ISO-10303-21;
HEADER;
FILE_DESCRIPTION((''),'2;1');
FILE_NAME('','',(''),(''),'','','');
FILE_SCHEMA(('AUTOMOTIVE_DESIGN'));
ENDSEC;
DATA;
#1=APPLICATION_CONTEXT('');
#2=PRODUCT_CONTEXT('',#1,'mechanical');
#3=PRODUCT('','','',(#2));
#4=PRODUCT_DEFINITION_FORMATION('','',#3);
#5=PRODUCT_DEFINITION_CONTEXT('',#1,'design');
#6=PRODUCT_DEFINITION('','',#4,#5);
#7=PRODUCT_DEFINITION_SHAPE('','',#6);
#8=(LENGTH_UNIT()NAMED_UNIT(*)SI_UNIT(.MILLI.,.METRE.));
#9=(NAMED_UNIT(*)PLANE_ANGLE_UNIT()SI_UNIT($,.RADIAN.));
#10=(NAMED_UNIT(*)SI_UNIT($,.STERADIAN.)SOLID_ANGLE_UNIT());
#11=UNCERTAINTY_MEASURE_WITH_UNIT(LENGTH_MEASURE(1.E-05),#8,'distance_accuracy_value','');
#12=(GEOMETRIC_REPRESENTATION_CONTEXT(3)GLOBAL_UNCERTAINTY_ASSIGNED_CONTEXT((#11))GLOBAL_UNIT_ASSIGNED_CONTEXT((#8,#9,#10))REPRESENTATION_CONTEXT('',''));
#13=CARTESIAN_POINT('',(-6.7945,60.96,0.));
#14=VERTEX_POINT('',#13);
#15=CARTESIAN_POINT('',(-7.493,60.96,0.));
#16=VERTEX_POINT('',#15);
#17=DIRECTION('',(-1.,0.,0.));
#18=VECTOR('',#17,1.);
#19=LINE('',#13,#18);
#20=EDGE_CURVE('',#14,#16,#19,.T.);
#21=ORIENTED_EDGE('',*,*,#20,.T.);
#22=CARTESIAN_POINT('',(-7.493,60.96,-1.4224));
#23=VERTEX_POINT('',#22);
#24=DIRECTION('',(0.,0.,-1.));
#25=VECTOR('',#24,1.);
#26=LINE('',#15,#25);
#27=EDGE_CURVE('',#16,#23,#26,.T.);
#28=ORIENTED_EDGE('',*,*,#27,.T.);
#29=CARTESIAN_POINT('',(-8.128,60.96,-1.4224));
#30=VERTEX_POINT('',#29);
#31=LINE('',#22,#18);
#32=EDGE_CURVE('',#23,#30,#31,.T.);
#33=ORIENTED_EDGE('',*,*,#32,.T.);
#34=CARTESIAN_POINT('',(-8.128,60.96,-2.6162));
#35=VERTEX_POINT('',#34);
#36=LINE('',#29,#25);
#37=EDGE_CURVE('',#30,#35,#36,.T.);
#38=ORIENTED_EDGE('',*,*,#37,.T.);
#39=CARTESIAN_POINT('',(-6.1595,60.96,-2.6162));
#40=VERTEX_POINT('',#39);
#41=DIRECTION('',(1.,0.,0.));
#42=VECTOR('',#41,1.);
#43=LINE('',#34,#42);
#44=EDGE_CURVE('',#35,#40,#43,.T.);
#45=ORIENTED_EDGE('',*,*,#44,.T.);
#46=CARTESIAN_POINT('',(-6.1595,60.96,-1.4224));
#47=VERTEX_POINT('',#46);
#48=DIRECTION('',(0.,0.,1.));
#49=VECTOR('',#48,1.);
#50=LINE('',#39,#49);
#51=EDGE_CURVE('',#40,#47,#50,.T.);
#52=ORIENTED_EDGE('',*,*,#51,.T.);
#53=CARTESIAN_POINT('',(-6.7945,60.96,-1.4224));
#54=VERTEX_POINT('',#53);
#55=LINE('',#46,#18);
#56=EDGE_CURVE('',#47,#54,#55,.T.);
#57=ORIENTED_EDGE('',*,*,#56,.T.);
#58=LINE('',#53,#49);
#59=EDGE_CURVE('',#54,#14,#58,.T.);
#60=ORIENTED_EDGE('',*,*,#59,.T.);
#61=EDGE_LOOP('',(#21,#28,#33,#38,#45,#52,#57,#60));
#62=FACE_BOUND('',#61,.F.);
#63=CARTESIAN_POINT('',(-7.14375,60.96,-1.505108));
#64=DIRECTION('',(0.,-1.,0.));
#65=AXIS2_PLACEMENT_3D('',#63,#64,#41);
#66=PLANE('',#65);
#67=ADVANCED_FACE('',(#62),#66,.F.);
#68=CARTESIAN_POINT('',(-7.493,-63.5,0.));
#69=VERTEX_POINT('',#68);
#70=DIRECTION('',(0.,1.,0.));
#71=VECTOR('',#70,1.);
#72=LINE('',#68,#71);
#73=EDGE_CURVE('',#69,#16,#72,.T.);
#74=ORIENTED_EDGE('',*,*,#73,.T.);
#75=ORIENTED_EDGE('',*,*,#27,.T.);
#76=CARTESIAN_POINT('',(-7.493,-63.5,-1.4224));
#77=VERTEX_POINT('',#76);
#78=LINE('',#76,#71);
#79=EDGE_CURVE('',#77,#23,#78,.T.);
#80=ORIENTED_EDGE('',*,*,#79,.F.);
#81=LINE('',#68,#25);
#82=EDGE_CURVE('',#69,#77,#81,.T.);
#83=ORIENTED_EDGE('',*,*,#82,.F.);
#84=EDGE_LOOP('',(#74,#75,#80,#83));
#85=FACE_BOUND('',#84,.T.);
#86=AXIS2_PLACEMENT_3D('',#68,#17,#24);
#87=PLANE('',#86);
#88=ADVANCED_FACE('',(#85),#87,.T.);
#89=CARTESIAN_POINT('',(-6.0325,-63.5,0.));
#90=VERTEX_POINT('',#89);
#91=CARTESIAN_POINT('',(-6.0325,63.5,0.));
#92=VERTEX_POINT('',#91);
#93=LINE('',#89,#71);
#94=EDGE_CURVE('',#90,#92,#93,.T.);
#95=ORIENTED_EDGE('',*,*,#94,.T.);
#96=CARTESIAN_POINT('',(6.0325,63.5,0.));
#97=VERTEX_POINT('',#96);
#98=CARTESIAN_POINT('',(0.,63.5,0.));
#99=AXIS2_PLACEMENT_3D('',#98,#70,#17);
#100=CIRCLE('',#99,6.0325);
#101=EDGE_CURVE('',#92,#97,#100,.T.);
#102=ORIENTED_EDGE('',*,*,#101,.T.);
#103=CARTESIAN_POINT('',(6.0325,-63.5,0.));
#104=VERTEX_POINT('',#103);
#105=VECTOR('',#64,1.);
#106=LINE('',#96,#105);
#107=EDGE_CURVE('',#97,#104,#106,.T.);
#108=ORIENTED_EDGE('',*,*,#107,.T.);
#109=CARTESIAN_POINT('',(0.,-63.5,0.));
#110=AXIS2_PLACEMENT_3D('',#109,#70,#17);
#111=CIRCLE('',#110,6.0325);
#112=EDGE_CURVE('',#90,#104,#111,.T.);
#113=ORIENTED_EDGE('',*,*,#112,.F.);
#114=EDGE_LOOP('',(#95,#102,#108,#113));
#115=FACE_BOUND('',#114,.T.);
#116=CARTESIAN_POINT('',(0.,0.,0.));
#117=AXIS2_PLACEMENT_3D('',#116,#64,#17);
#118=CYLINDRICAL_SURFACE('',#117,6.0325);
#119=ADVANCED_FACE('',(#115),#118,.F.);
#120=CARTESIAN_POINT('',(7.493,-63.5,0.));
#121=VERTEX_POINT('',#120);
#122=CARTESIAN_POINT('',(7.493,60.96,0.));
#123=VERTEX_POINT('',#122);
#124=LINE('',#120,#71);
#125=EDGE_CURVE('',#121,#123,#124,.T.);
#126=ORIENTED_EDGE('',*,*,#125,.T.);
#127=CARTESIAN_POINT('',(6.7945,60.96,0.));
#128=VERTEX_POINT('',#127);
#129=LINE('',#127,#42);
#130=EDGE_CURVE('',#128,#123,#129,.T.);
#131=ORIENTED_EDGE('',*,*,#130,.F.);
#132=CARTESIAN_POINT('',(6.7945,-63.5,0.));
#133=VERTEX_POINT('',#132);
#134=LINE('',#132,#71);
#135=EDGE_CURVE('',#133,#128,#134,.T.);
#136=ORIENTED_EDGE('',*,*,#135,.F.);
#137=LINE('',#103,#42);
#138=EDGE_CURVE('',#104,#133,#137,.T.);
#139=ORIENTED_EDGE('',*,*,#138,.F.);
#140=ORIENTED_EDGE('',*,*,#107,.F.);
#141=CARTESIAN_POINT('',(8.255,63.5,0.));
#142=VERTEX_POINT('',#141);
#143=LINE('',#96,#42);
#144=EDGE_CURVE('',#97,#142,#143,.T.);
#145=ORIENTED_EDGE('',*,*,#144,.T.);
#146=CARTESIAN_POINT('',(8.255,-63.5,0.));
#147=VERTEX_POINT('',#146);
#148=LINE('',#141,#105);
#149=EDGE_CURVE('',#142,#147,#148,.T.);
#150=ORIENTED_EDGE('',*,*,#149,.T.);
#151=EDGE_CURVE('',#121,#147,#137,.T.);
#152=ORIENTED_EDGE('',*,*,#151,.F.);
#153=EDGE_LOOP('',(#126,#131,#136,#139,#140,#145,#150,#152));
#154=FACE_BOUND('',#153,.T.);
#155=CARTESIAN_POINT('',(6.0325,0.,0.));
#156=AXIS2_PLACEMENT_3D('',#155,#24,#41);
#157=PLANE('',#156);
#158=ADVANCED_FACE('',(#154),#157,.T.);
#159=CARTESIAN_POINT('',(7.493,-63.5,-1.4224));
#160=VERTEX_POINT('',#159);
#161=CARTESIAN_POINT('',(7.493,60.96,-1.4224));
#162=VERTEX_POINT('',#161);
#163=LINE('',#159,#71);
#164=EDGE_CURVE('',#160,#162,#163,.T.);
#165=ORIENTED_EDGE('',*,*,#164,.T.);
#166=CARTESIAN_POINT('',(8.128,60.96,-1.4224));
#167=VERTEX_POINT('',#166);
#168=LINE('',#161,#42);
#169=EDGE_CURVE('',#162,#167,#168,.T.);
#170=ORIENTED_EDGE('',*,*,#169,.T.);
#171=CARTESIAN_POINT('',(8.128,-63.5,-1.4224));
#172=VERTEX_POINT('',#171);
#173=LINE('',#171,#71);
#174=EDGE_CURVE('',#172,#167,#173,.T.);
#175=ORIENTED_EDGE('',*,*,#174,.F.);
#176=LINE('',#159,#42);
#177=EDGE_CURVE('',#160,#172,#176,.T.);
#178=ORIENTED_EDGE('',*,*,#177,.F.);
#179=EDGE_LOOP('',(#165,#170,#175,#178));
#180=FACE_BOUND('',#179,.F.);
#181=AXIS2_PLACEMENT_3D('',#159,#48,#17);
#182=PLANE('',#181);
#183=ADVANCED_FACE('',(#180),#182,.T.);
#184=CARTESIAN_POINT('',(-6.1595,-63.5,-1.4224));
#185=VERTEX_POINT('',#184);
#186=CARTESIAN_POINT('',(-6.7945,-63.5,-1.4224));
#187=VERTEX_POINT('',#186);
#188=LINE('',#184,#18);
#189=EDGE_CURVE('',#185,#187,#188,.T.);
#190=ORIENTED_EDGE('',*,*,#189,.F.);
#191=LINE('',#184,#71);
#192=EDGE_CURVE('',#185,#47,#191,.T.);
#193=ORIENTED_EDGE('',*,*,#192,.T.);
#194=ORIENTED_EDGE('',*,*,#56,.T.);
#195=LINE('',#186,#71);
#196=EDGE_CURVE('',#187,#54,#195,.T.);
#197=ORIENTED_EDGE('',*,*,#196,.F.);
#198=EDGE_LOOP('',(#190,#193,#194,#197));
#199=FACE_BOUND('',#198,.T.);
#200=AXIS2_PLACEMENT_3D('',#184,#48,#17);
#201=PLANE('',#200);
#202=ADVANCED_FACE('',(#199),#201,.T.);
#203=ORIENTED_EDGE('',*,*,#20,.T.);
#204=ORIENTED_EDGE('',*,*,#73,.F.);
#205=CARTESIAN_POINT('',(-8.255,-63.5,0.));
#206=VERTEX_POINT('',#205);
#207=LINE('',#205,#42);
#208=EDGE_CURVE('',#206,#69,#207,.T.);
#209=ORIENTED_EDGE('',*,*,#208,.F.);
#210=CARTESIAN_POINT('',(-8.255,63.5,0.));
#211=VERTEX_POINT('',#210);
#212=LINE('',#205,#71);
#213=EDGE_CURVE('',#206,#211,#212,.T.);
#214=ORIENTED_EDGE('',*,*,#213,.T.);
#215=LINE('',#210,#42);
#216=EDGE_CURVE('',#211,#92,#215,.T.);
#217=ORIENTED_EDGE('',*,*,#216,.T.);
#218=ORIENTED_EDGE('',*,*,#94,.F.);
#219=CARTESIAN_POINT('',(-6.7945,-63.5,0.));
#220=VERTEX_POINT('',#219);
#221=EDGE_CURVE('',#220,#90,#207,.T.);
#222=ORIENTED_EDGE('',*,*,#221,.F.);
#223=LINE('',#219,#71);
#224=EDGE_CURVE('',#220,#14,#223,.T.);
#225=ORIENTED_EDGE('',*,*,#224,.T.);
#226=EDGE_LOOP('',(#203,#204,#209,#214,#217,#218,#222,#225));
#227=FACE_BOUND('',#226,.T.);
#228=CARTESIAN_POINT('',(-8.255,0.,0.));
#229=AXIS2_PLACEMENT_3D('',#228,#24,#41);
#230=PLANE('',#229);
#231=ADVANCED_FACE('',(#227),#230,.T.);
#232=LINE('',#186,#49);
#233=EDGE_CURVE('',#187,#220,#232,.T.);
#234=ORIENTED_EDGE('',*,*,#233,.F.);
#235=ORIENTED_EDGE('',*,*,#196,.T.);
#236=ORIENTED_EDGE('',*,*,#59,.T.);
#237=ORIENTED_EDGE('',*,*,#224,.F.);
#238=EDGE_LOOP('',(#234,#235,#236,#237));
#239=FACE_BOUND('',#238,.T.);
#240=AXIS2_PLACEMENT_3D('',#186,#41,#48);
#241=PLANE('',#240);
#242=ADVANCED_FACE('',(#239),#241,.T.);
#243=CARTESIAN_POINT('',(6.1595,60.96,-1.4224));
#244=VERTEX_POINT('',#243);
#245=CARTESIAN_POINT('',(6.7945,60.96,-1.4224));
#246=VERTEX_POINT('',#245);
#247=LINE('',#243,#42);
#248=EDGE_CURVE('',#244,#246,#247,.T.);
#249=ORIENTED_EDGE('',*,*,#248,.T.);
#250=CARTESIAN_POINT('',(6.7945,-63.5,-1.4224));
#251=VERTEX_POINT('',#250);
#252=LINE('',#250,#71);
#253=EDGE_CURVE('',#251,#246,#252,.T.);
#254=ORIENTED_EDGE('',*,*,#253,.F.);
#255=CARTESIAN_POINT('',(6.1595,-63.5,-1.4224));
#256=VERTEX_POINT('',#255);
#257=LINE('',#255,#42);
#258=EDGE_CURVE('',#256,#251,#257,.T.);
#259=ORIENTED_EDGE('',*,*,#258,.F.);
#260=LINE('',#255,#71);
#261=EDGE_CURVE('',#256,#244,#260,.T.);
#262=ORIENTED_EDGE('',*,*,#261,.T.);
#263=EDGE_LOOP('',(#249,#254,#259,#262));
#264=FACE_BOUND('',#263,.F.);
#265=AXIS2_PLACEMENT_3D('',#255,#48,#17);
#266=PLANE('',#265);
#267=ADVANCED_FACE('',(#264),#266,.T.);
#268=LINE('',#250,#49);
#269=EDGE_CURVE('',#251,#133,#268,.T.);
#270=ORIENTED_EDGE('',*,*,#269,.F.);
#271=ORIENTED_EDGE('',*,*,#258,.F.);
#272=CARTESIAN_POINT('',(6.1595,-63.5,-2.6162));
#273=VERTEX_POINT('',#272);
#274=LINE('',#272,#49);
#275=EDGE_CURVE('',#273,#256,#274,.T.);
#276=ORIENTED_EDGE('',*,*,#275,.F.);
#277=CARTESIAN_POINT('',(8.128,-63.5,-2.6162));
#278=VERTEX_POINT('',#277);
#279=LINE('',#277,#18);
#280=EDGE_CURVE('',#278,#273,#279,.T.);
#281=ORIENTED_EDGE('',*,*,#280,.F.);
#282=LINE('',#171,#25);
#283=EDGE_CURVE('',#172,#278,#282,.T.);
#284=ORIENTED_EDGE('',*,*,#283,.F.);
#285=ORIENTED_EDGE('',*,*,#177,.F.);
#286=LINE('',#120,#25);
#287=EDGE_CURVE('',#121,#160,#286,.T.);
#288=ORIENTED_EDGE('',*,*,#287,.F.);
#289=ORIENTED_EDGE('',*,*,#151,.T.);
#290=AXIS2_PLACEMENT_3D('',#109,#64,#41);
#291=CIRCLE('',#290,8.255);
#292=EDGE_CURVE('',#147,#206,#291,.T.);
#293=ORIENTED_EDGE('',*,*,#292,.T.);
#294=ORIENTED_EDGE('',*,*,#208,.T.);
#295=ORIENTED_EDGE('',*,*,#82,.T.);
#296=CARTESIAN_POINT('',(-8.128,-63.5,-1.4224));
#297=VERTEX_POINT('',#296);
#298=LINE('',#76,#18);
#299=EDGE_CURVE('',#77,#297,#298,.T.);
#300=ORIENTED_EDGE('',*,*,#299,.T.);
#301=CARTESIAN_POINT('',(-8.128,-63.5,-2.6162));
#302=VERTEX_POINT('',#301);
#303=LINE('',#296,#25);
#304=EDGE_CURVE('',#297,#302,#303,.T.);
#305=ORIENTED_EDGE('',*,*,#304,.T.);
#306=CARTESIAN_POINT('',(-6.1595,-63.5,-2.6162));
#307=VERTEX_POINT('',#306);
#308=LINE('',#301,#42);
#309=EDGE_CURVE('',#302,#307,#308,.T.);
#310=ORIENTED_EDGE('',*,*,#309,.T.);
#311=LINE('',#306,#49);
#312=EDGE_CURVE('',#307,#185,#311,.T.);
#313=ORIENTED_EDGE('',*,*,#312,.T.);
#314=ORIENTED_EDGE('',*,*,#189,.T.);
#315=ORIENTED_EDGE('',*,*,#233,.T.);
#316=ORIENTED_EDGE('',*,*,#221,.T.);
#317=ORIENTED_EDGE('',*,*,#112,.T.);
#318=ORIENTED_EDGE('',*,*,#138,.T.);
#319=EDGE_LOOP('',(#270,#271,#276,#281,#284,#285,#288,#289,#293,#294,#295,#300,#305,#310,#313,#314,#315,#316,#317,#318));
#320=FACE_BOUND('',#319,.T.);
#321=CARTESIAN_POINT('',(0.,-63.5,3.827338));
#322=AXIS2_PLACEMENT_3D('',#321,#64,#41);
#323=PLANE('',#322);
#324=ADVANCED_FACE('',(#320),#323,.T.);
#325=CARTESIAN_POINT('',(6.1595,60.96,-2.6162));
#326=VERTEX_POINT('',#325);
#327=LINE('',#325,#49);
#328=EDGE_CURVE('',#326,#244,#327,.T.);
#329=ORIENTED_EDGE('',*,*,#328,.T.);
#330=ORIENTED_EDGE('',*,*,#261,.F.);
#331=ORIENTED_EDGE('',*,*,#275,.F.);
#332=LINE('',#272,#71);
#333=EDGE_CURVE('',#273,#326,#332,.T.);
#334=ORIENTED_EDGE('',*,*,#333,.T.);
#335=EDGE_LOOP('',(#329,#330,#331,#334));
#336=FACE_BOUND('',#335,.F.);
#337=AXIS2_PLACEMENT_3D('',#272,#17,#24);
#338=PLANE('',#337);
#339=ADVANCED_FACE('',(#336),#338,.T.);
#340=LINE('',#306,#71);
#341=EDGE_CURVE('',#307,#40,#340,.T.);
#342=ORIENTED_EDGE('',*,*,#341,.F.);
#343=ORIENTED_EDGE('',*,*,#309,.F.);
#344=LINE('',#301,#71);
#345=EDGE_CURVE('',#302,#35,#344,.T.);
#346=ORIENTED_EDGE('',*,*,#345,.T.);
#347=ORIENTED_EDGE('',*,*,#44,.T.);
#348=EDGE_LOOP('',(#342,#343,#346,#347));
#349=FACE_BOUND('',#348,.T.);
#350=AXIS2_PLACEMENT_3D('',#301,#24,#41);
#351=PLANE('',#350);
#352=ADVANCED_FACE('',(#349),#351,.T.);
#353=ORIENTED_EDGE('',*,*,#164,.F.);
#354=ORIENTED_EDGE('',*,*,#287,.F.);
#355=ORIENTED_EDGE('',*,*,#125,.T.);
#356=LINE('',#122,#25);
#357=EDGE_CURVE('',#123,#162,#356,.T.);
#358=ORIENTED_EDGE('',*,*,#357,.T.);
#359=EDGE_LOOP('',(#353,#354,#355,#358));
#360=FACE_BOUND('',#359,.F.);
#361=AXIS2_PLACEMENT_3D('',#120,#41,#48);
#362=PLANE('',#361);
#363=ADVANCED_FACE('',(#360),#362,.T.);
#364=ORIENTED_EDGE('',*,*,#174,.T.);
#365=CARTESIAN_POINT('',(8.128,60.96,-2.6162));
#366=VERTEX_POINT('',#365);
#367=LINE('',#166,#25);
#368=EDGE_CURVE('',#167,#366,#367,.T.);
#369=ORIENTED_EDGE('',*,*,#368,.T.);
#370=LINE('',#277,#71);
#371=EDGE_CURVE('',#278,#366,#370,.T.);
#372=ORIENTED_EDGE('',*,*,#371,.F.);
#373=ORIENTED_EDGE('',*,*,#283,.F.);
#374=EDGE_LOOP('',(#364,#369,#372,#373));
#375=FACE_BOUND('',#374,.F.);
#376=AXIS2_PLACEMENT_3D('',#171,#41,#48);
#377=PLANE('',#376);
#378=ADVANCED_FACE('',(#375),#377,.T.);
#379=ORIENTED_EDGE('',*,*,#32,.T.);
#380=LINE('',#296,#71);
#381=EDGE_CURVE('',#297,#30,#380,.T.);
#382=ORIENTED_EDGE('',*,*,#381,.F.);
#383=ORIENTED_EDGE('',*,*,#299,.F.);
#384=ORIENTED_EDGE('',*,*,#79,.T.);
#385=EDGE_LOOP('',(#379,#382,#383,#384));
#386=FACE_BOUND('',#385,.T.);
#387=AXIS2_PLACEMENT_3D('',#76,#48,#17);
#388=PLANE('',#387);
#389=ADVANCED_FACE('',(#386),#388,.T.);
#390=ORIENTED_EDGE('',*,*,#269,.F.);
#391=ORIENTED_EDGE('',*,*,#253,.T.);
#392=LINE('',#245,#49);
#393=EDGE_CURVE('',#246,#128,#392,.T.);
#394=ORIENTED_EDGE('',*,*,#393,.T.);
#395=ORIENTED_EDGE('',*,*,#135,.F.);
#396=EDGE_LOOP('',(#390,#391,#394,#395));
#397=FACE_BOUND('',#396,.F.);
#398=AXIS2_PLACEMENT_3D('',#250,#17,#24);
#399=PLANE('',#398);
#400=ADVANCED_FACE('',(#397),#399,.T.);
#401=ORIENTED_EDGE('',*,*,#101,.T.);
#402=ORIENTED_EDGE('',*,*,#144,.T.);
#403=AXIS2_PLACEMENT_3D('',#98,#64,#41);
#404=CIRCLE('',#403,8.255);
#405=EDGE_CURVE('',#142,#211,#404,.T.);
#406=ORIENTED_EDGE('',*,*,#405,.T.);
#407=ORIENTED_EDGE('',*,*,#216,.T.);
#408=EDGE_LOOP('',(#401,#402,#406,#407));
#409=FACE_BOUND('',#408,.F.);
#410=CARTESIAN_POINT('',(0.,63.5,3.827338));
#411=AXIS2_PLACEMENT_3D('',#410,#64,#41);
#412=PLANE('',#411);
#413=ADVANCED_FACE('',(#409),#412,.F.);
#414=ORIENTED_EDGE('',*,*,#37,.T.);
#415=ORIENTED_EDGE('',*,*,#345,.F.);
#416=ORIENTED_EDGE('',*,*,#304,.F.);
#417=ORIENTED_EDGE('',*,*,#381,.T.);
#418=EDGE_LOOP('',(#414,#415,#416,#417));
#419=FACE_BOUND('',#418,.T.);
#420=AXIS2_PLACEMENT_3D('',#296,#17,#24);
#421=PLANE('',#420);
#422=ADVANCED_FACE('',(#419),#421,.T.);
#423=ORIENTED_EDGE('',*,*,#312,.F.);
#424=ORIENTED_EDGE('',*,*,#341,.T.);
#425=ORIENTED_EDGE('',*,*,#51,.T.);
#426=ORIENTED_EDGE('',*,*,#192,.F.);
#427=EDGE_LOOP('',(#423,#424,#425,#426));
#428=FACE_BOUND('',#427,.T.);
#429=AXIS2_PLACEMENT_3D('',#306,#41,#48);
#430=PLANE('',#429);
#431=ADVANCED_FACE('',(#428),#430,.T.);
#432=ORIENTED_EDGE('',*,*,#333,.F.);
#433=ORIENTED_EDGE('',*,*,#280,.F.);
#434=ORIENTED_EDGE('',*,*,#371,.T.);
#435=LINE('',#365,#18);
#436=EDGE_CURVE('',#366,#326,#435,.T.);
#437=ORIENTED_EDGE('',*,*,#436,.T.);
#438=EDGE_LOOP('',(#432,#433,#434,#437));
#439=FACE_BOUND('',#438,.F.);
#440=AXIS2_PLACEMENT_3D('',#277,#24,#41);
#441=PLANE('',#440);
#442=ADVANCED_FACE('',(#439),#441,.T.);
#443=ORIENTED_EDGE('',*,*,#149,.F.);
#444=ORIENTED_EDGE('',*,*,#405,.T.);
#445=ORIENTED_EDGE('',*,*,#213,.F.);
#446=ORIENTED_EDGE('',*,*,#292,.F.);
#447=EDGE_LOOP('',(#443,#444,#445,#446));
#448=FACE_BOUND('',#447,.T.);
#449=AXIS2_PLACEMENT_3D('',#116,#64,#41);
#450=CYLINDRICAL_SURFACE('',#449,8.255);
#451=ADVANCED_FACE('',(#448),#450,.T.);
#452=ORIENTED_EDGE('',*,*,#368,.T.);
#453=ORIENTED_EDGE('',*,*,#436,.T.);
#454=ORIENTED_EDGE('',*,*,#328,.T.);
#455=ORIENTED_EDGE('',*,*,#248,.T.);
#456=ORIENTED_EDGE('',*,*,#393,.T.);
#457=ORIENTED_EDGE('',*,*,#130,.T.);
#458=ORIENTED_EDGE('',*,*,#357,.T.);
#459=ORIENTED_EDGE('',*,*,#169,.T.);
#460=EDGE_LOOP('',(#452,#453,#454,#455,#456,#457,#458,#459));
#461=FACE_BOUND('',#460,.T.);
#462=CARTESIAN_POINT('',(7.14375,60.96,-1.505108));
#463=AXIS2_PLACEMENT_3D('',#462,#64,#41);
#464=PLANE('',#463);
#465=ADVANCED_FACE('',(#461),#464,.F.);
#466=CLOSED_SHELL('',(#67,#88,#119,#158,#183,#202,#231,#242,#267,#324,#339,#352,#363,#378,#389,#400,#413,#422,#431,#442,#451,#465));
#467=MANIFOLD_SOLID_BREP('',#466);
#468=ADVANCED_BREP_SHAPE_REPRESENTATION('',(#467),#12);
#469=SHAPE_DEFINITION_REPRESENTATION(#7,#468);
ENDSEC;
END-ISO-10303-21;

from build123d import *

# Parameters (mm, degrees)
F1_DEPTH = 63.5
F3_DEPTH = 124.46


# Not quite as in the source:
# - a pattern or mirror of a feature is missing from the dataset's text; its kind, count and spacing are read off the source's solid


with BuildPart() as f1:
    # F0 (on Front) → F1 (new body, symmetric)
    with BuildSketch(Plane.XZ):
        with BuildLine():
            ThreePointArc((-6.0325, 0), (0, 6.0325), (6.0325, 0))
            Line((6.0325, 0), (8.255, 0))
            ThreePointArc((8.255, 0), (0, 8.255), (-8.255, 0))
            Line((-8.255, 0), (-6.0325, 0))
        make_face()
    extrude(amount=F1_DEPTH, both=True)

    # F2 (on face) → F3 (join)
    with BuildSketch(Plane.XZ.offset(63.5)):
        Polygon((-6.7945, 0), (-7.493, 0), (-7.493, -1.4224), (-8.128, -1.4224), (-8.128, -2.6162), (-6.1595, -2.6162), (-6.1595, -1.4224), (-6.7945, -1.4224), align=None)
    f3 = extrude(amount=-F3_DEPTH)

    # F3_copies: F3 across plane
    add(f3.mirror(Plane(origin=(0, 0, 0), x_dir=(0, 0, 1), z_dir=(1, 0, 0))))


solid = f1.part
